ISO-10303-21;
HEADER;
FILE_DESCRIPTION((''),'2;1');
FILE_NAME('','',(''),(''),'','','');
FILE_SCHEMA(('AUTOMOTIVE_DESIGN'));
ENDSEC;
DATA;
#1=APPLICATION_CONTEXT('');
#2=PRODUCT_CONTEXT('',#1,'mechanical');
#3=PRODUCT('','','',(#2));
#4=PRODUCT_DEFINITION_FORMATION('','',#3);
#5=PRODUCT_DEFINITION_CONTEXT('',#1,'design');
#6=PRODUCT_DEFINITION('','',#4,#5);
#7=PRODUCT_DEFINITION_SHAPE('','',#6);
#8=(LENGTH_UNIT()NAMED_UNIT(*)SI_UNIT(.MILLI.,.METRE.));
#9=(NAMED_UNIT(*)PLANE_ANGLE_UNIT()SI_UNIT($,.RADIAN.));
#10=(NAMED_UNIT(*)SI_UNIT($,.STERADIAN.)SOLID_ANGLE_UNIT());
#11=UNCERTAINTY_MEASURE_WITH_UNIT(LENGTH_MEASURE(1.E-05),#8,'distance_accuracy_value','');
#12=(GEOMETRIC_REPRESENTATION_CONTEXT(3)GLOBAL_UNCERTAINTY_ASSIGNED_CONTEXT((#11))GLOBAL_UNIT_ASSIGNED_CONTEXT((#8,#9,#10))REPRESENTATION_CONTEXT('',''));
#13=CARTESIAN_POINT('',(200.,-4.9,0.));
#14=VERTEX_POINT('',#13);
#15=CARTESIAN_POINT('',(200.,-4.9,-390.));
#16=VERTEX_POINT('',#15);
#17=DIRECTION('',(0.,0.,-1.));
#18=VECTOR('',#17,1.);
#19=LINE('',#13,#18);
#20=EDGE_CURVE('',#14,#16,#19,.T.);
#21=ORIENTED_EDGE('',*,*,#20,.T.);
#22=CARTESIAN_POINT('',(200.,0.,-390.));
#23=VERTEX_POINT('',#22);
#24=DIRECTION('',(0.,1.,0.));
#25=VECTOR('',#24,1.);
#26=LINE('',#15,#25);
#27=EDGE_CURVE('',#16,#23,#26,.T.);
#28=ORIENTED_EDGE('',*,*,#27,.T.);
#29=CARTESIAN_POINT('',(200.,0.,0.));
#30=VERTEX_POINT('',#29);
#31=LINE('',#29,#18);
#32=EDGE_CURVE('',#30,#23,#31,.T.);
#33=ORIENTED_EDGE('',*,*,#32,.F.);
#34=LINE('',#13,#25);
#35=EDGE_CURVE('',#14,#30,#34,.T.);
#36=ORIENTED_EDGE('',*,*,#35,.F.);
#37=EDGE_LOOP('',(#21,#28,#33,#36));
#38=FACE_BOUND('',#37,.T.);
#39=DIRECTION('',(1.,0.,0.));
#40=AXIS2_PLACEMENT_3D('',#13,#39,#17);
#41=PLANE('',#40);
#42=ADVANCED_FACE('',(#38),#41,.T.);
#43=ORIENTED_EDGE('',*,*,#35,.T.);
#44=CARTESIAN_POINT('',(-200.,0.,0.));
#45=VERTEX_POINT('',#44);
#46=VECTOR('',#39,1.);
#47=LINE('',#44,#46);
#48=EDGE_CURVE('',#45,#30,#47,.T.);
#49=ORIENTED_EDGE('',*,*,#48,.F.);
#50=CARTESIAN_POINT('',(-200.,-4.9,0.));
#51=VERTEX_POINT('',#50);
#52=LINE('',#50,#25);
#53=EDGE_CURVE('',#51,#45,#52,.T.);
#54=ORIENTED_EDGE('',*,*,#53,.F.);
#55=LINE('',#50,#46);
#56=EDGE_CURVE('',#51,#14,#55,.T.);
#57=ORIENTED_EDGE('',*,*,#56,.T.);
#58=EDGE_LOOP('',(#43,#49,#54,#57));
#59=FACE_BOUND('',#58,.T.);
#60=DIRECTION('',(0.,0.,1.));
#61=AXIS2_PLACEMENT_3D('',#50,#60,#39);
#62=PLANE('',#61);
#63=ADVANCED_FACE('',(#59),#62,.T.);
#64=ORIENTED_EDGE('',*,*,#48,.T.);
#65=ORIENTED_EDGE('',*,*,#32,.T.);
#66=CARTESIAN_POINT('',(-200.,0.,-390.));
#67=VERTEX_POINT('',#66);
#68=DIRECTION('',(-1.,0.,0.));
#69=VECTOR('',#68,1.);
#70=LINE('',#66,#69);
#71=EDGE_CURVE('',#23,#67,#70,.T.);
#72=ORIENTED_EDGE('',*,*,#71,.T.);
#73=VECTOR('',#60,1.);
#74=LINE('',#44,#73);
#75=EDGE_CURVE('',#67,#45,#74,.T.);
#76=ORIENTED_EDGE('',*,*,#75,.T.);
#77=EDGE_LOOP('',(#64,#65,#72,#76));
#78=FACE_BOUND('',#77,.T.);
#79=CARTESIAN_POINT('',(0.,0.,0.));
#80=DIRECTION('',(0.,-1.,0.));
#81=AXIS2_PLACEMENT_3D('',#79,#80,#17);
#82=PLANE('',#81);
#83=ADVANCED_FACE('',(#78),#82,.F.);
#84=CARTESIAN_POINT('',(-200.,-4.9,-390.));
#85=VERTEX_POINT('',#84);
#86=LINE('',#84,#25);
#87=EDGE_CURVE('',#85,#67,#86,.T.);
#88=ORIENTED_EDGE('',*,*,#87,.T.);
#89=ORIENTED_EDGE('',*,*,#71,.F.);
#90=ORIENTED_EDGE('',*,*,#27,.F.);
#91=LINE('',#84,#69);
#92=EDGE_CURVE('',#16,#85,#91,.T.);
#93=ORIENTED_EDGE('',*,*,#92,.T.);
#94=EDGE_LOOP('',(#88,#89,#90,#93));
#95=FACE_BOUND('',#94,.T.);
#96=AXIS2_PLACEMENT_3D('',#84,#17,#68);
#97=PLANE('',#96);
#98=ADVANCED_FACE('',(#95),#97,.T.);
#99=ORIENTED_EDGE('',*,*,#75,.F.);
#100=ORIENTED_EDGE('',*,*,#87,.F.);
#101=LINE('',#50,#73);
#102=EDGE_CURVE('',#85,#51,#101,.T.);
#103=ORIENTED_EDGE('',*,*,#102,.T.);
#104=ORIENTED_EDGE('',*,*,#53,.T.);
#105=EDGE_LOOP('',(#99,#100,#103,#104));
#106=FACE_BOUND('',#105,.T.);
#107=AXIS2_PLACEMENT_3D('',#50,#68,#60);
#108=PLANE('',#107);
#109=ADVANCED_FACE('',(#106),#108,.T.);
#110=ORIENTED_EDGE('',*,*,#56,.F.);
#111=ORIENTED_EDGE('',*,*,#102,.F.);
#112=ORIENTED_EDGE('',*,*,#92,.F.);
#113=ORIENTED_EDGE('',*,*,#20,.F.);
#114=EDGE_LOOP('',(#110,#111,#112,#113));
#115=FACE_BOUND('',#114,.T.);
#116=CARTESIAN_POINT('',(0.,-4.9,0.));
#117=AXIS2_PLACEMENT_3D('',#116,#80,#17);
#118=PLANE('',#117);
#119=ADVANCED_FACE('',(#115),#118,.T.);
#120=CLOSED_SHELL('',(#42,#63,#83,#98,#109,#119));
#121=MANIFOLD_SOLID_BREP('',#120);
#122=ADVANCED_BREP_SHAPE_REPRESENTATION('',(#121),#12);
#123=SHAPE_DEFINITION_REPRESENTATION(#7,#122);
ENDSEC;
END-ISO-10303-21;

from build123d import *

# Parameters (mm, degrees)
SKETCH2_W          = 400
SKETCH2_H          = 390
BASE_FLANGE2_DEPTH = 4.9


# Sheet-metal steps are written as plain solids
with BuildPart() as part:
    # Sketch2 → Base-Flange2 (new body)
    with BuildSketch(Plane(origin=(0, 0, 0), x_dir=(1, 0, 0), z_dir=(0, 1, 0))):
        with Locations((0, 195)):
            Rectangle(SKETCH2_W, SKETCH2_H)
    extrude(amount=-BASE_FLANGE2_DEPTH)


solid = part.part
